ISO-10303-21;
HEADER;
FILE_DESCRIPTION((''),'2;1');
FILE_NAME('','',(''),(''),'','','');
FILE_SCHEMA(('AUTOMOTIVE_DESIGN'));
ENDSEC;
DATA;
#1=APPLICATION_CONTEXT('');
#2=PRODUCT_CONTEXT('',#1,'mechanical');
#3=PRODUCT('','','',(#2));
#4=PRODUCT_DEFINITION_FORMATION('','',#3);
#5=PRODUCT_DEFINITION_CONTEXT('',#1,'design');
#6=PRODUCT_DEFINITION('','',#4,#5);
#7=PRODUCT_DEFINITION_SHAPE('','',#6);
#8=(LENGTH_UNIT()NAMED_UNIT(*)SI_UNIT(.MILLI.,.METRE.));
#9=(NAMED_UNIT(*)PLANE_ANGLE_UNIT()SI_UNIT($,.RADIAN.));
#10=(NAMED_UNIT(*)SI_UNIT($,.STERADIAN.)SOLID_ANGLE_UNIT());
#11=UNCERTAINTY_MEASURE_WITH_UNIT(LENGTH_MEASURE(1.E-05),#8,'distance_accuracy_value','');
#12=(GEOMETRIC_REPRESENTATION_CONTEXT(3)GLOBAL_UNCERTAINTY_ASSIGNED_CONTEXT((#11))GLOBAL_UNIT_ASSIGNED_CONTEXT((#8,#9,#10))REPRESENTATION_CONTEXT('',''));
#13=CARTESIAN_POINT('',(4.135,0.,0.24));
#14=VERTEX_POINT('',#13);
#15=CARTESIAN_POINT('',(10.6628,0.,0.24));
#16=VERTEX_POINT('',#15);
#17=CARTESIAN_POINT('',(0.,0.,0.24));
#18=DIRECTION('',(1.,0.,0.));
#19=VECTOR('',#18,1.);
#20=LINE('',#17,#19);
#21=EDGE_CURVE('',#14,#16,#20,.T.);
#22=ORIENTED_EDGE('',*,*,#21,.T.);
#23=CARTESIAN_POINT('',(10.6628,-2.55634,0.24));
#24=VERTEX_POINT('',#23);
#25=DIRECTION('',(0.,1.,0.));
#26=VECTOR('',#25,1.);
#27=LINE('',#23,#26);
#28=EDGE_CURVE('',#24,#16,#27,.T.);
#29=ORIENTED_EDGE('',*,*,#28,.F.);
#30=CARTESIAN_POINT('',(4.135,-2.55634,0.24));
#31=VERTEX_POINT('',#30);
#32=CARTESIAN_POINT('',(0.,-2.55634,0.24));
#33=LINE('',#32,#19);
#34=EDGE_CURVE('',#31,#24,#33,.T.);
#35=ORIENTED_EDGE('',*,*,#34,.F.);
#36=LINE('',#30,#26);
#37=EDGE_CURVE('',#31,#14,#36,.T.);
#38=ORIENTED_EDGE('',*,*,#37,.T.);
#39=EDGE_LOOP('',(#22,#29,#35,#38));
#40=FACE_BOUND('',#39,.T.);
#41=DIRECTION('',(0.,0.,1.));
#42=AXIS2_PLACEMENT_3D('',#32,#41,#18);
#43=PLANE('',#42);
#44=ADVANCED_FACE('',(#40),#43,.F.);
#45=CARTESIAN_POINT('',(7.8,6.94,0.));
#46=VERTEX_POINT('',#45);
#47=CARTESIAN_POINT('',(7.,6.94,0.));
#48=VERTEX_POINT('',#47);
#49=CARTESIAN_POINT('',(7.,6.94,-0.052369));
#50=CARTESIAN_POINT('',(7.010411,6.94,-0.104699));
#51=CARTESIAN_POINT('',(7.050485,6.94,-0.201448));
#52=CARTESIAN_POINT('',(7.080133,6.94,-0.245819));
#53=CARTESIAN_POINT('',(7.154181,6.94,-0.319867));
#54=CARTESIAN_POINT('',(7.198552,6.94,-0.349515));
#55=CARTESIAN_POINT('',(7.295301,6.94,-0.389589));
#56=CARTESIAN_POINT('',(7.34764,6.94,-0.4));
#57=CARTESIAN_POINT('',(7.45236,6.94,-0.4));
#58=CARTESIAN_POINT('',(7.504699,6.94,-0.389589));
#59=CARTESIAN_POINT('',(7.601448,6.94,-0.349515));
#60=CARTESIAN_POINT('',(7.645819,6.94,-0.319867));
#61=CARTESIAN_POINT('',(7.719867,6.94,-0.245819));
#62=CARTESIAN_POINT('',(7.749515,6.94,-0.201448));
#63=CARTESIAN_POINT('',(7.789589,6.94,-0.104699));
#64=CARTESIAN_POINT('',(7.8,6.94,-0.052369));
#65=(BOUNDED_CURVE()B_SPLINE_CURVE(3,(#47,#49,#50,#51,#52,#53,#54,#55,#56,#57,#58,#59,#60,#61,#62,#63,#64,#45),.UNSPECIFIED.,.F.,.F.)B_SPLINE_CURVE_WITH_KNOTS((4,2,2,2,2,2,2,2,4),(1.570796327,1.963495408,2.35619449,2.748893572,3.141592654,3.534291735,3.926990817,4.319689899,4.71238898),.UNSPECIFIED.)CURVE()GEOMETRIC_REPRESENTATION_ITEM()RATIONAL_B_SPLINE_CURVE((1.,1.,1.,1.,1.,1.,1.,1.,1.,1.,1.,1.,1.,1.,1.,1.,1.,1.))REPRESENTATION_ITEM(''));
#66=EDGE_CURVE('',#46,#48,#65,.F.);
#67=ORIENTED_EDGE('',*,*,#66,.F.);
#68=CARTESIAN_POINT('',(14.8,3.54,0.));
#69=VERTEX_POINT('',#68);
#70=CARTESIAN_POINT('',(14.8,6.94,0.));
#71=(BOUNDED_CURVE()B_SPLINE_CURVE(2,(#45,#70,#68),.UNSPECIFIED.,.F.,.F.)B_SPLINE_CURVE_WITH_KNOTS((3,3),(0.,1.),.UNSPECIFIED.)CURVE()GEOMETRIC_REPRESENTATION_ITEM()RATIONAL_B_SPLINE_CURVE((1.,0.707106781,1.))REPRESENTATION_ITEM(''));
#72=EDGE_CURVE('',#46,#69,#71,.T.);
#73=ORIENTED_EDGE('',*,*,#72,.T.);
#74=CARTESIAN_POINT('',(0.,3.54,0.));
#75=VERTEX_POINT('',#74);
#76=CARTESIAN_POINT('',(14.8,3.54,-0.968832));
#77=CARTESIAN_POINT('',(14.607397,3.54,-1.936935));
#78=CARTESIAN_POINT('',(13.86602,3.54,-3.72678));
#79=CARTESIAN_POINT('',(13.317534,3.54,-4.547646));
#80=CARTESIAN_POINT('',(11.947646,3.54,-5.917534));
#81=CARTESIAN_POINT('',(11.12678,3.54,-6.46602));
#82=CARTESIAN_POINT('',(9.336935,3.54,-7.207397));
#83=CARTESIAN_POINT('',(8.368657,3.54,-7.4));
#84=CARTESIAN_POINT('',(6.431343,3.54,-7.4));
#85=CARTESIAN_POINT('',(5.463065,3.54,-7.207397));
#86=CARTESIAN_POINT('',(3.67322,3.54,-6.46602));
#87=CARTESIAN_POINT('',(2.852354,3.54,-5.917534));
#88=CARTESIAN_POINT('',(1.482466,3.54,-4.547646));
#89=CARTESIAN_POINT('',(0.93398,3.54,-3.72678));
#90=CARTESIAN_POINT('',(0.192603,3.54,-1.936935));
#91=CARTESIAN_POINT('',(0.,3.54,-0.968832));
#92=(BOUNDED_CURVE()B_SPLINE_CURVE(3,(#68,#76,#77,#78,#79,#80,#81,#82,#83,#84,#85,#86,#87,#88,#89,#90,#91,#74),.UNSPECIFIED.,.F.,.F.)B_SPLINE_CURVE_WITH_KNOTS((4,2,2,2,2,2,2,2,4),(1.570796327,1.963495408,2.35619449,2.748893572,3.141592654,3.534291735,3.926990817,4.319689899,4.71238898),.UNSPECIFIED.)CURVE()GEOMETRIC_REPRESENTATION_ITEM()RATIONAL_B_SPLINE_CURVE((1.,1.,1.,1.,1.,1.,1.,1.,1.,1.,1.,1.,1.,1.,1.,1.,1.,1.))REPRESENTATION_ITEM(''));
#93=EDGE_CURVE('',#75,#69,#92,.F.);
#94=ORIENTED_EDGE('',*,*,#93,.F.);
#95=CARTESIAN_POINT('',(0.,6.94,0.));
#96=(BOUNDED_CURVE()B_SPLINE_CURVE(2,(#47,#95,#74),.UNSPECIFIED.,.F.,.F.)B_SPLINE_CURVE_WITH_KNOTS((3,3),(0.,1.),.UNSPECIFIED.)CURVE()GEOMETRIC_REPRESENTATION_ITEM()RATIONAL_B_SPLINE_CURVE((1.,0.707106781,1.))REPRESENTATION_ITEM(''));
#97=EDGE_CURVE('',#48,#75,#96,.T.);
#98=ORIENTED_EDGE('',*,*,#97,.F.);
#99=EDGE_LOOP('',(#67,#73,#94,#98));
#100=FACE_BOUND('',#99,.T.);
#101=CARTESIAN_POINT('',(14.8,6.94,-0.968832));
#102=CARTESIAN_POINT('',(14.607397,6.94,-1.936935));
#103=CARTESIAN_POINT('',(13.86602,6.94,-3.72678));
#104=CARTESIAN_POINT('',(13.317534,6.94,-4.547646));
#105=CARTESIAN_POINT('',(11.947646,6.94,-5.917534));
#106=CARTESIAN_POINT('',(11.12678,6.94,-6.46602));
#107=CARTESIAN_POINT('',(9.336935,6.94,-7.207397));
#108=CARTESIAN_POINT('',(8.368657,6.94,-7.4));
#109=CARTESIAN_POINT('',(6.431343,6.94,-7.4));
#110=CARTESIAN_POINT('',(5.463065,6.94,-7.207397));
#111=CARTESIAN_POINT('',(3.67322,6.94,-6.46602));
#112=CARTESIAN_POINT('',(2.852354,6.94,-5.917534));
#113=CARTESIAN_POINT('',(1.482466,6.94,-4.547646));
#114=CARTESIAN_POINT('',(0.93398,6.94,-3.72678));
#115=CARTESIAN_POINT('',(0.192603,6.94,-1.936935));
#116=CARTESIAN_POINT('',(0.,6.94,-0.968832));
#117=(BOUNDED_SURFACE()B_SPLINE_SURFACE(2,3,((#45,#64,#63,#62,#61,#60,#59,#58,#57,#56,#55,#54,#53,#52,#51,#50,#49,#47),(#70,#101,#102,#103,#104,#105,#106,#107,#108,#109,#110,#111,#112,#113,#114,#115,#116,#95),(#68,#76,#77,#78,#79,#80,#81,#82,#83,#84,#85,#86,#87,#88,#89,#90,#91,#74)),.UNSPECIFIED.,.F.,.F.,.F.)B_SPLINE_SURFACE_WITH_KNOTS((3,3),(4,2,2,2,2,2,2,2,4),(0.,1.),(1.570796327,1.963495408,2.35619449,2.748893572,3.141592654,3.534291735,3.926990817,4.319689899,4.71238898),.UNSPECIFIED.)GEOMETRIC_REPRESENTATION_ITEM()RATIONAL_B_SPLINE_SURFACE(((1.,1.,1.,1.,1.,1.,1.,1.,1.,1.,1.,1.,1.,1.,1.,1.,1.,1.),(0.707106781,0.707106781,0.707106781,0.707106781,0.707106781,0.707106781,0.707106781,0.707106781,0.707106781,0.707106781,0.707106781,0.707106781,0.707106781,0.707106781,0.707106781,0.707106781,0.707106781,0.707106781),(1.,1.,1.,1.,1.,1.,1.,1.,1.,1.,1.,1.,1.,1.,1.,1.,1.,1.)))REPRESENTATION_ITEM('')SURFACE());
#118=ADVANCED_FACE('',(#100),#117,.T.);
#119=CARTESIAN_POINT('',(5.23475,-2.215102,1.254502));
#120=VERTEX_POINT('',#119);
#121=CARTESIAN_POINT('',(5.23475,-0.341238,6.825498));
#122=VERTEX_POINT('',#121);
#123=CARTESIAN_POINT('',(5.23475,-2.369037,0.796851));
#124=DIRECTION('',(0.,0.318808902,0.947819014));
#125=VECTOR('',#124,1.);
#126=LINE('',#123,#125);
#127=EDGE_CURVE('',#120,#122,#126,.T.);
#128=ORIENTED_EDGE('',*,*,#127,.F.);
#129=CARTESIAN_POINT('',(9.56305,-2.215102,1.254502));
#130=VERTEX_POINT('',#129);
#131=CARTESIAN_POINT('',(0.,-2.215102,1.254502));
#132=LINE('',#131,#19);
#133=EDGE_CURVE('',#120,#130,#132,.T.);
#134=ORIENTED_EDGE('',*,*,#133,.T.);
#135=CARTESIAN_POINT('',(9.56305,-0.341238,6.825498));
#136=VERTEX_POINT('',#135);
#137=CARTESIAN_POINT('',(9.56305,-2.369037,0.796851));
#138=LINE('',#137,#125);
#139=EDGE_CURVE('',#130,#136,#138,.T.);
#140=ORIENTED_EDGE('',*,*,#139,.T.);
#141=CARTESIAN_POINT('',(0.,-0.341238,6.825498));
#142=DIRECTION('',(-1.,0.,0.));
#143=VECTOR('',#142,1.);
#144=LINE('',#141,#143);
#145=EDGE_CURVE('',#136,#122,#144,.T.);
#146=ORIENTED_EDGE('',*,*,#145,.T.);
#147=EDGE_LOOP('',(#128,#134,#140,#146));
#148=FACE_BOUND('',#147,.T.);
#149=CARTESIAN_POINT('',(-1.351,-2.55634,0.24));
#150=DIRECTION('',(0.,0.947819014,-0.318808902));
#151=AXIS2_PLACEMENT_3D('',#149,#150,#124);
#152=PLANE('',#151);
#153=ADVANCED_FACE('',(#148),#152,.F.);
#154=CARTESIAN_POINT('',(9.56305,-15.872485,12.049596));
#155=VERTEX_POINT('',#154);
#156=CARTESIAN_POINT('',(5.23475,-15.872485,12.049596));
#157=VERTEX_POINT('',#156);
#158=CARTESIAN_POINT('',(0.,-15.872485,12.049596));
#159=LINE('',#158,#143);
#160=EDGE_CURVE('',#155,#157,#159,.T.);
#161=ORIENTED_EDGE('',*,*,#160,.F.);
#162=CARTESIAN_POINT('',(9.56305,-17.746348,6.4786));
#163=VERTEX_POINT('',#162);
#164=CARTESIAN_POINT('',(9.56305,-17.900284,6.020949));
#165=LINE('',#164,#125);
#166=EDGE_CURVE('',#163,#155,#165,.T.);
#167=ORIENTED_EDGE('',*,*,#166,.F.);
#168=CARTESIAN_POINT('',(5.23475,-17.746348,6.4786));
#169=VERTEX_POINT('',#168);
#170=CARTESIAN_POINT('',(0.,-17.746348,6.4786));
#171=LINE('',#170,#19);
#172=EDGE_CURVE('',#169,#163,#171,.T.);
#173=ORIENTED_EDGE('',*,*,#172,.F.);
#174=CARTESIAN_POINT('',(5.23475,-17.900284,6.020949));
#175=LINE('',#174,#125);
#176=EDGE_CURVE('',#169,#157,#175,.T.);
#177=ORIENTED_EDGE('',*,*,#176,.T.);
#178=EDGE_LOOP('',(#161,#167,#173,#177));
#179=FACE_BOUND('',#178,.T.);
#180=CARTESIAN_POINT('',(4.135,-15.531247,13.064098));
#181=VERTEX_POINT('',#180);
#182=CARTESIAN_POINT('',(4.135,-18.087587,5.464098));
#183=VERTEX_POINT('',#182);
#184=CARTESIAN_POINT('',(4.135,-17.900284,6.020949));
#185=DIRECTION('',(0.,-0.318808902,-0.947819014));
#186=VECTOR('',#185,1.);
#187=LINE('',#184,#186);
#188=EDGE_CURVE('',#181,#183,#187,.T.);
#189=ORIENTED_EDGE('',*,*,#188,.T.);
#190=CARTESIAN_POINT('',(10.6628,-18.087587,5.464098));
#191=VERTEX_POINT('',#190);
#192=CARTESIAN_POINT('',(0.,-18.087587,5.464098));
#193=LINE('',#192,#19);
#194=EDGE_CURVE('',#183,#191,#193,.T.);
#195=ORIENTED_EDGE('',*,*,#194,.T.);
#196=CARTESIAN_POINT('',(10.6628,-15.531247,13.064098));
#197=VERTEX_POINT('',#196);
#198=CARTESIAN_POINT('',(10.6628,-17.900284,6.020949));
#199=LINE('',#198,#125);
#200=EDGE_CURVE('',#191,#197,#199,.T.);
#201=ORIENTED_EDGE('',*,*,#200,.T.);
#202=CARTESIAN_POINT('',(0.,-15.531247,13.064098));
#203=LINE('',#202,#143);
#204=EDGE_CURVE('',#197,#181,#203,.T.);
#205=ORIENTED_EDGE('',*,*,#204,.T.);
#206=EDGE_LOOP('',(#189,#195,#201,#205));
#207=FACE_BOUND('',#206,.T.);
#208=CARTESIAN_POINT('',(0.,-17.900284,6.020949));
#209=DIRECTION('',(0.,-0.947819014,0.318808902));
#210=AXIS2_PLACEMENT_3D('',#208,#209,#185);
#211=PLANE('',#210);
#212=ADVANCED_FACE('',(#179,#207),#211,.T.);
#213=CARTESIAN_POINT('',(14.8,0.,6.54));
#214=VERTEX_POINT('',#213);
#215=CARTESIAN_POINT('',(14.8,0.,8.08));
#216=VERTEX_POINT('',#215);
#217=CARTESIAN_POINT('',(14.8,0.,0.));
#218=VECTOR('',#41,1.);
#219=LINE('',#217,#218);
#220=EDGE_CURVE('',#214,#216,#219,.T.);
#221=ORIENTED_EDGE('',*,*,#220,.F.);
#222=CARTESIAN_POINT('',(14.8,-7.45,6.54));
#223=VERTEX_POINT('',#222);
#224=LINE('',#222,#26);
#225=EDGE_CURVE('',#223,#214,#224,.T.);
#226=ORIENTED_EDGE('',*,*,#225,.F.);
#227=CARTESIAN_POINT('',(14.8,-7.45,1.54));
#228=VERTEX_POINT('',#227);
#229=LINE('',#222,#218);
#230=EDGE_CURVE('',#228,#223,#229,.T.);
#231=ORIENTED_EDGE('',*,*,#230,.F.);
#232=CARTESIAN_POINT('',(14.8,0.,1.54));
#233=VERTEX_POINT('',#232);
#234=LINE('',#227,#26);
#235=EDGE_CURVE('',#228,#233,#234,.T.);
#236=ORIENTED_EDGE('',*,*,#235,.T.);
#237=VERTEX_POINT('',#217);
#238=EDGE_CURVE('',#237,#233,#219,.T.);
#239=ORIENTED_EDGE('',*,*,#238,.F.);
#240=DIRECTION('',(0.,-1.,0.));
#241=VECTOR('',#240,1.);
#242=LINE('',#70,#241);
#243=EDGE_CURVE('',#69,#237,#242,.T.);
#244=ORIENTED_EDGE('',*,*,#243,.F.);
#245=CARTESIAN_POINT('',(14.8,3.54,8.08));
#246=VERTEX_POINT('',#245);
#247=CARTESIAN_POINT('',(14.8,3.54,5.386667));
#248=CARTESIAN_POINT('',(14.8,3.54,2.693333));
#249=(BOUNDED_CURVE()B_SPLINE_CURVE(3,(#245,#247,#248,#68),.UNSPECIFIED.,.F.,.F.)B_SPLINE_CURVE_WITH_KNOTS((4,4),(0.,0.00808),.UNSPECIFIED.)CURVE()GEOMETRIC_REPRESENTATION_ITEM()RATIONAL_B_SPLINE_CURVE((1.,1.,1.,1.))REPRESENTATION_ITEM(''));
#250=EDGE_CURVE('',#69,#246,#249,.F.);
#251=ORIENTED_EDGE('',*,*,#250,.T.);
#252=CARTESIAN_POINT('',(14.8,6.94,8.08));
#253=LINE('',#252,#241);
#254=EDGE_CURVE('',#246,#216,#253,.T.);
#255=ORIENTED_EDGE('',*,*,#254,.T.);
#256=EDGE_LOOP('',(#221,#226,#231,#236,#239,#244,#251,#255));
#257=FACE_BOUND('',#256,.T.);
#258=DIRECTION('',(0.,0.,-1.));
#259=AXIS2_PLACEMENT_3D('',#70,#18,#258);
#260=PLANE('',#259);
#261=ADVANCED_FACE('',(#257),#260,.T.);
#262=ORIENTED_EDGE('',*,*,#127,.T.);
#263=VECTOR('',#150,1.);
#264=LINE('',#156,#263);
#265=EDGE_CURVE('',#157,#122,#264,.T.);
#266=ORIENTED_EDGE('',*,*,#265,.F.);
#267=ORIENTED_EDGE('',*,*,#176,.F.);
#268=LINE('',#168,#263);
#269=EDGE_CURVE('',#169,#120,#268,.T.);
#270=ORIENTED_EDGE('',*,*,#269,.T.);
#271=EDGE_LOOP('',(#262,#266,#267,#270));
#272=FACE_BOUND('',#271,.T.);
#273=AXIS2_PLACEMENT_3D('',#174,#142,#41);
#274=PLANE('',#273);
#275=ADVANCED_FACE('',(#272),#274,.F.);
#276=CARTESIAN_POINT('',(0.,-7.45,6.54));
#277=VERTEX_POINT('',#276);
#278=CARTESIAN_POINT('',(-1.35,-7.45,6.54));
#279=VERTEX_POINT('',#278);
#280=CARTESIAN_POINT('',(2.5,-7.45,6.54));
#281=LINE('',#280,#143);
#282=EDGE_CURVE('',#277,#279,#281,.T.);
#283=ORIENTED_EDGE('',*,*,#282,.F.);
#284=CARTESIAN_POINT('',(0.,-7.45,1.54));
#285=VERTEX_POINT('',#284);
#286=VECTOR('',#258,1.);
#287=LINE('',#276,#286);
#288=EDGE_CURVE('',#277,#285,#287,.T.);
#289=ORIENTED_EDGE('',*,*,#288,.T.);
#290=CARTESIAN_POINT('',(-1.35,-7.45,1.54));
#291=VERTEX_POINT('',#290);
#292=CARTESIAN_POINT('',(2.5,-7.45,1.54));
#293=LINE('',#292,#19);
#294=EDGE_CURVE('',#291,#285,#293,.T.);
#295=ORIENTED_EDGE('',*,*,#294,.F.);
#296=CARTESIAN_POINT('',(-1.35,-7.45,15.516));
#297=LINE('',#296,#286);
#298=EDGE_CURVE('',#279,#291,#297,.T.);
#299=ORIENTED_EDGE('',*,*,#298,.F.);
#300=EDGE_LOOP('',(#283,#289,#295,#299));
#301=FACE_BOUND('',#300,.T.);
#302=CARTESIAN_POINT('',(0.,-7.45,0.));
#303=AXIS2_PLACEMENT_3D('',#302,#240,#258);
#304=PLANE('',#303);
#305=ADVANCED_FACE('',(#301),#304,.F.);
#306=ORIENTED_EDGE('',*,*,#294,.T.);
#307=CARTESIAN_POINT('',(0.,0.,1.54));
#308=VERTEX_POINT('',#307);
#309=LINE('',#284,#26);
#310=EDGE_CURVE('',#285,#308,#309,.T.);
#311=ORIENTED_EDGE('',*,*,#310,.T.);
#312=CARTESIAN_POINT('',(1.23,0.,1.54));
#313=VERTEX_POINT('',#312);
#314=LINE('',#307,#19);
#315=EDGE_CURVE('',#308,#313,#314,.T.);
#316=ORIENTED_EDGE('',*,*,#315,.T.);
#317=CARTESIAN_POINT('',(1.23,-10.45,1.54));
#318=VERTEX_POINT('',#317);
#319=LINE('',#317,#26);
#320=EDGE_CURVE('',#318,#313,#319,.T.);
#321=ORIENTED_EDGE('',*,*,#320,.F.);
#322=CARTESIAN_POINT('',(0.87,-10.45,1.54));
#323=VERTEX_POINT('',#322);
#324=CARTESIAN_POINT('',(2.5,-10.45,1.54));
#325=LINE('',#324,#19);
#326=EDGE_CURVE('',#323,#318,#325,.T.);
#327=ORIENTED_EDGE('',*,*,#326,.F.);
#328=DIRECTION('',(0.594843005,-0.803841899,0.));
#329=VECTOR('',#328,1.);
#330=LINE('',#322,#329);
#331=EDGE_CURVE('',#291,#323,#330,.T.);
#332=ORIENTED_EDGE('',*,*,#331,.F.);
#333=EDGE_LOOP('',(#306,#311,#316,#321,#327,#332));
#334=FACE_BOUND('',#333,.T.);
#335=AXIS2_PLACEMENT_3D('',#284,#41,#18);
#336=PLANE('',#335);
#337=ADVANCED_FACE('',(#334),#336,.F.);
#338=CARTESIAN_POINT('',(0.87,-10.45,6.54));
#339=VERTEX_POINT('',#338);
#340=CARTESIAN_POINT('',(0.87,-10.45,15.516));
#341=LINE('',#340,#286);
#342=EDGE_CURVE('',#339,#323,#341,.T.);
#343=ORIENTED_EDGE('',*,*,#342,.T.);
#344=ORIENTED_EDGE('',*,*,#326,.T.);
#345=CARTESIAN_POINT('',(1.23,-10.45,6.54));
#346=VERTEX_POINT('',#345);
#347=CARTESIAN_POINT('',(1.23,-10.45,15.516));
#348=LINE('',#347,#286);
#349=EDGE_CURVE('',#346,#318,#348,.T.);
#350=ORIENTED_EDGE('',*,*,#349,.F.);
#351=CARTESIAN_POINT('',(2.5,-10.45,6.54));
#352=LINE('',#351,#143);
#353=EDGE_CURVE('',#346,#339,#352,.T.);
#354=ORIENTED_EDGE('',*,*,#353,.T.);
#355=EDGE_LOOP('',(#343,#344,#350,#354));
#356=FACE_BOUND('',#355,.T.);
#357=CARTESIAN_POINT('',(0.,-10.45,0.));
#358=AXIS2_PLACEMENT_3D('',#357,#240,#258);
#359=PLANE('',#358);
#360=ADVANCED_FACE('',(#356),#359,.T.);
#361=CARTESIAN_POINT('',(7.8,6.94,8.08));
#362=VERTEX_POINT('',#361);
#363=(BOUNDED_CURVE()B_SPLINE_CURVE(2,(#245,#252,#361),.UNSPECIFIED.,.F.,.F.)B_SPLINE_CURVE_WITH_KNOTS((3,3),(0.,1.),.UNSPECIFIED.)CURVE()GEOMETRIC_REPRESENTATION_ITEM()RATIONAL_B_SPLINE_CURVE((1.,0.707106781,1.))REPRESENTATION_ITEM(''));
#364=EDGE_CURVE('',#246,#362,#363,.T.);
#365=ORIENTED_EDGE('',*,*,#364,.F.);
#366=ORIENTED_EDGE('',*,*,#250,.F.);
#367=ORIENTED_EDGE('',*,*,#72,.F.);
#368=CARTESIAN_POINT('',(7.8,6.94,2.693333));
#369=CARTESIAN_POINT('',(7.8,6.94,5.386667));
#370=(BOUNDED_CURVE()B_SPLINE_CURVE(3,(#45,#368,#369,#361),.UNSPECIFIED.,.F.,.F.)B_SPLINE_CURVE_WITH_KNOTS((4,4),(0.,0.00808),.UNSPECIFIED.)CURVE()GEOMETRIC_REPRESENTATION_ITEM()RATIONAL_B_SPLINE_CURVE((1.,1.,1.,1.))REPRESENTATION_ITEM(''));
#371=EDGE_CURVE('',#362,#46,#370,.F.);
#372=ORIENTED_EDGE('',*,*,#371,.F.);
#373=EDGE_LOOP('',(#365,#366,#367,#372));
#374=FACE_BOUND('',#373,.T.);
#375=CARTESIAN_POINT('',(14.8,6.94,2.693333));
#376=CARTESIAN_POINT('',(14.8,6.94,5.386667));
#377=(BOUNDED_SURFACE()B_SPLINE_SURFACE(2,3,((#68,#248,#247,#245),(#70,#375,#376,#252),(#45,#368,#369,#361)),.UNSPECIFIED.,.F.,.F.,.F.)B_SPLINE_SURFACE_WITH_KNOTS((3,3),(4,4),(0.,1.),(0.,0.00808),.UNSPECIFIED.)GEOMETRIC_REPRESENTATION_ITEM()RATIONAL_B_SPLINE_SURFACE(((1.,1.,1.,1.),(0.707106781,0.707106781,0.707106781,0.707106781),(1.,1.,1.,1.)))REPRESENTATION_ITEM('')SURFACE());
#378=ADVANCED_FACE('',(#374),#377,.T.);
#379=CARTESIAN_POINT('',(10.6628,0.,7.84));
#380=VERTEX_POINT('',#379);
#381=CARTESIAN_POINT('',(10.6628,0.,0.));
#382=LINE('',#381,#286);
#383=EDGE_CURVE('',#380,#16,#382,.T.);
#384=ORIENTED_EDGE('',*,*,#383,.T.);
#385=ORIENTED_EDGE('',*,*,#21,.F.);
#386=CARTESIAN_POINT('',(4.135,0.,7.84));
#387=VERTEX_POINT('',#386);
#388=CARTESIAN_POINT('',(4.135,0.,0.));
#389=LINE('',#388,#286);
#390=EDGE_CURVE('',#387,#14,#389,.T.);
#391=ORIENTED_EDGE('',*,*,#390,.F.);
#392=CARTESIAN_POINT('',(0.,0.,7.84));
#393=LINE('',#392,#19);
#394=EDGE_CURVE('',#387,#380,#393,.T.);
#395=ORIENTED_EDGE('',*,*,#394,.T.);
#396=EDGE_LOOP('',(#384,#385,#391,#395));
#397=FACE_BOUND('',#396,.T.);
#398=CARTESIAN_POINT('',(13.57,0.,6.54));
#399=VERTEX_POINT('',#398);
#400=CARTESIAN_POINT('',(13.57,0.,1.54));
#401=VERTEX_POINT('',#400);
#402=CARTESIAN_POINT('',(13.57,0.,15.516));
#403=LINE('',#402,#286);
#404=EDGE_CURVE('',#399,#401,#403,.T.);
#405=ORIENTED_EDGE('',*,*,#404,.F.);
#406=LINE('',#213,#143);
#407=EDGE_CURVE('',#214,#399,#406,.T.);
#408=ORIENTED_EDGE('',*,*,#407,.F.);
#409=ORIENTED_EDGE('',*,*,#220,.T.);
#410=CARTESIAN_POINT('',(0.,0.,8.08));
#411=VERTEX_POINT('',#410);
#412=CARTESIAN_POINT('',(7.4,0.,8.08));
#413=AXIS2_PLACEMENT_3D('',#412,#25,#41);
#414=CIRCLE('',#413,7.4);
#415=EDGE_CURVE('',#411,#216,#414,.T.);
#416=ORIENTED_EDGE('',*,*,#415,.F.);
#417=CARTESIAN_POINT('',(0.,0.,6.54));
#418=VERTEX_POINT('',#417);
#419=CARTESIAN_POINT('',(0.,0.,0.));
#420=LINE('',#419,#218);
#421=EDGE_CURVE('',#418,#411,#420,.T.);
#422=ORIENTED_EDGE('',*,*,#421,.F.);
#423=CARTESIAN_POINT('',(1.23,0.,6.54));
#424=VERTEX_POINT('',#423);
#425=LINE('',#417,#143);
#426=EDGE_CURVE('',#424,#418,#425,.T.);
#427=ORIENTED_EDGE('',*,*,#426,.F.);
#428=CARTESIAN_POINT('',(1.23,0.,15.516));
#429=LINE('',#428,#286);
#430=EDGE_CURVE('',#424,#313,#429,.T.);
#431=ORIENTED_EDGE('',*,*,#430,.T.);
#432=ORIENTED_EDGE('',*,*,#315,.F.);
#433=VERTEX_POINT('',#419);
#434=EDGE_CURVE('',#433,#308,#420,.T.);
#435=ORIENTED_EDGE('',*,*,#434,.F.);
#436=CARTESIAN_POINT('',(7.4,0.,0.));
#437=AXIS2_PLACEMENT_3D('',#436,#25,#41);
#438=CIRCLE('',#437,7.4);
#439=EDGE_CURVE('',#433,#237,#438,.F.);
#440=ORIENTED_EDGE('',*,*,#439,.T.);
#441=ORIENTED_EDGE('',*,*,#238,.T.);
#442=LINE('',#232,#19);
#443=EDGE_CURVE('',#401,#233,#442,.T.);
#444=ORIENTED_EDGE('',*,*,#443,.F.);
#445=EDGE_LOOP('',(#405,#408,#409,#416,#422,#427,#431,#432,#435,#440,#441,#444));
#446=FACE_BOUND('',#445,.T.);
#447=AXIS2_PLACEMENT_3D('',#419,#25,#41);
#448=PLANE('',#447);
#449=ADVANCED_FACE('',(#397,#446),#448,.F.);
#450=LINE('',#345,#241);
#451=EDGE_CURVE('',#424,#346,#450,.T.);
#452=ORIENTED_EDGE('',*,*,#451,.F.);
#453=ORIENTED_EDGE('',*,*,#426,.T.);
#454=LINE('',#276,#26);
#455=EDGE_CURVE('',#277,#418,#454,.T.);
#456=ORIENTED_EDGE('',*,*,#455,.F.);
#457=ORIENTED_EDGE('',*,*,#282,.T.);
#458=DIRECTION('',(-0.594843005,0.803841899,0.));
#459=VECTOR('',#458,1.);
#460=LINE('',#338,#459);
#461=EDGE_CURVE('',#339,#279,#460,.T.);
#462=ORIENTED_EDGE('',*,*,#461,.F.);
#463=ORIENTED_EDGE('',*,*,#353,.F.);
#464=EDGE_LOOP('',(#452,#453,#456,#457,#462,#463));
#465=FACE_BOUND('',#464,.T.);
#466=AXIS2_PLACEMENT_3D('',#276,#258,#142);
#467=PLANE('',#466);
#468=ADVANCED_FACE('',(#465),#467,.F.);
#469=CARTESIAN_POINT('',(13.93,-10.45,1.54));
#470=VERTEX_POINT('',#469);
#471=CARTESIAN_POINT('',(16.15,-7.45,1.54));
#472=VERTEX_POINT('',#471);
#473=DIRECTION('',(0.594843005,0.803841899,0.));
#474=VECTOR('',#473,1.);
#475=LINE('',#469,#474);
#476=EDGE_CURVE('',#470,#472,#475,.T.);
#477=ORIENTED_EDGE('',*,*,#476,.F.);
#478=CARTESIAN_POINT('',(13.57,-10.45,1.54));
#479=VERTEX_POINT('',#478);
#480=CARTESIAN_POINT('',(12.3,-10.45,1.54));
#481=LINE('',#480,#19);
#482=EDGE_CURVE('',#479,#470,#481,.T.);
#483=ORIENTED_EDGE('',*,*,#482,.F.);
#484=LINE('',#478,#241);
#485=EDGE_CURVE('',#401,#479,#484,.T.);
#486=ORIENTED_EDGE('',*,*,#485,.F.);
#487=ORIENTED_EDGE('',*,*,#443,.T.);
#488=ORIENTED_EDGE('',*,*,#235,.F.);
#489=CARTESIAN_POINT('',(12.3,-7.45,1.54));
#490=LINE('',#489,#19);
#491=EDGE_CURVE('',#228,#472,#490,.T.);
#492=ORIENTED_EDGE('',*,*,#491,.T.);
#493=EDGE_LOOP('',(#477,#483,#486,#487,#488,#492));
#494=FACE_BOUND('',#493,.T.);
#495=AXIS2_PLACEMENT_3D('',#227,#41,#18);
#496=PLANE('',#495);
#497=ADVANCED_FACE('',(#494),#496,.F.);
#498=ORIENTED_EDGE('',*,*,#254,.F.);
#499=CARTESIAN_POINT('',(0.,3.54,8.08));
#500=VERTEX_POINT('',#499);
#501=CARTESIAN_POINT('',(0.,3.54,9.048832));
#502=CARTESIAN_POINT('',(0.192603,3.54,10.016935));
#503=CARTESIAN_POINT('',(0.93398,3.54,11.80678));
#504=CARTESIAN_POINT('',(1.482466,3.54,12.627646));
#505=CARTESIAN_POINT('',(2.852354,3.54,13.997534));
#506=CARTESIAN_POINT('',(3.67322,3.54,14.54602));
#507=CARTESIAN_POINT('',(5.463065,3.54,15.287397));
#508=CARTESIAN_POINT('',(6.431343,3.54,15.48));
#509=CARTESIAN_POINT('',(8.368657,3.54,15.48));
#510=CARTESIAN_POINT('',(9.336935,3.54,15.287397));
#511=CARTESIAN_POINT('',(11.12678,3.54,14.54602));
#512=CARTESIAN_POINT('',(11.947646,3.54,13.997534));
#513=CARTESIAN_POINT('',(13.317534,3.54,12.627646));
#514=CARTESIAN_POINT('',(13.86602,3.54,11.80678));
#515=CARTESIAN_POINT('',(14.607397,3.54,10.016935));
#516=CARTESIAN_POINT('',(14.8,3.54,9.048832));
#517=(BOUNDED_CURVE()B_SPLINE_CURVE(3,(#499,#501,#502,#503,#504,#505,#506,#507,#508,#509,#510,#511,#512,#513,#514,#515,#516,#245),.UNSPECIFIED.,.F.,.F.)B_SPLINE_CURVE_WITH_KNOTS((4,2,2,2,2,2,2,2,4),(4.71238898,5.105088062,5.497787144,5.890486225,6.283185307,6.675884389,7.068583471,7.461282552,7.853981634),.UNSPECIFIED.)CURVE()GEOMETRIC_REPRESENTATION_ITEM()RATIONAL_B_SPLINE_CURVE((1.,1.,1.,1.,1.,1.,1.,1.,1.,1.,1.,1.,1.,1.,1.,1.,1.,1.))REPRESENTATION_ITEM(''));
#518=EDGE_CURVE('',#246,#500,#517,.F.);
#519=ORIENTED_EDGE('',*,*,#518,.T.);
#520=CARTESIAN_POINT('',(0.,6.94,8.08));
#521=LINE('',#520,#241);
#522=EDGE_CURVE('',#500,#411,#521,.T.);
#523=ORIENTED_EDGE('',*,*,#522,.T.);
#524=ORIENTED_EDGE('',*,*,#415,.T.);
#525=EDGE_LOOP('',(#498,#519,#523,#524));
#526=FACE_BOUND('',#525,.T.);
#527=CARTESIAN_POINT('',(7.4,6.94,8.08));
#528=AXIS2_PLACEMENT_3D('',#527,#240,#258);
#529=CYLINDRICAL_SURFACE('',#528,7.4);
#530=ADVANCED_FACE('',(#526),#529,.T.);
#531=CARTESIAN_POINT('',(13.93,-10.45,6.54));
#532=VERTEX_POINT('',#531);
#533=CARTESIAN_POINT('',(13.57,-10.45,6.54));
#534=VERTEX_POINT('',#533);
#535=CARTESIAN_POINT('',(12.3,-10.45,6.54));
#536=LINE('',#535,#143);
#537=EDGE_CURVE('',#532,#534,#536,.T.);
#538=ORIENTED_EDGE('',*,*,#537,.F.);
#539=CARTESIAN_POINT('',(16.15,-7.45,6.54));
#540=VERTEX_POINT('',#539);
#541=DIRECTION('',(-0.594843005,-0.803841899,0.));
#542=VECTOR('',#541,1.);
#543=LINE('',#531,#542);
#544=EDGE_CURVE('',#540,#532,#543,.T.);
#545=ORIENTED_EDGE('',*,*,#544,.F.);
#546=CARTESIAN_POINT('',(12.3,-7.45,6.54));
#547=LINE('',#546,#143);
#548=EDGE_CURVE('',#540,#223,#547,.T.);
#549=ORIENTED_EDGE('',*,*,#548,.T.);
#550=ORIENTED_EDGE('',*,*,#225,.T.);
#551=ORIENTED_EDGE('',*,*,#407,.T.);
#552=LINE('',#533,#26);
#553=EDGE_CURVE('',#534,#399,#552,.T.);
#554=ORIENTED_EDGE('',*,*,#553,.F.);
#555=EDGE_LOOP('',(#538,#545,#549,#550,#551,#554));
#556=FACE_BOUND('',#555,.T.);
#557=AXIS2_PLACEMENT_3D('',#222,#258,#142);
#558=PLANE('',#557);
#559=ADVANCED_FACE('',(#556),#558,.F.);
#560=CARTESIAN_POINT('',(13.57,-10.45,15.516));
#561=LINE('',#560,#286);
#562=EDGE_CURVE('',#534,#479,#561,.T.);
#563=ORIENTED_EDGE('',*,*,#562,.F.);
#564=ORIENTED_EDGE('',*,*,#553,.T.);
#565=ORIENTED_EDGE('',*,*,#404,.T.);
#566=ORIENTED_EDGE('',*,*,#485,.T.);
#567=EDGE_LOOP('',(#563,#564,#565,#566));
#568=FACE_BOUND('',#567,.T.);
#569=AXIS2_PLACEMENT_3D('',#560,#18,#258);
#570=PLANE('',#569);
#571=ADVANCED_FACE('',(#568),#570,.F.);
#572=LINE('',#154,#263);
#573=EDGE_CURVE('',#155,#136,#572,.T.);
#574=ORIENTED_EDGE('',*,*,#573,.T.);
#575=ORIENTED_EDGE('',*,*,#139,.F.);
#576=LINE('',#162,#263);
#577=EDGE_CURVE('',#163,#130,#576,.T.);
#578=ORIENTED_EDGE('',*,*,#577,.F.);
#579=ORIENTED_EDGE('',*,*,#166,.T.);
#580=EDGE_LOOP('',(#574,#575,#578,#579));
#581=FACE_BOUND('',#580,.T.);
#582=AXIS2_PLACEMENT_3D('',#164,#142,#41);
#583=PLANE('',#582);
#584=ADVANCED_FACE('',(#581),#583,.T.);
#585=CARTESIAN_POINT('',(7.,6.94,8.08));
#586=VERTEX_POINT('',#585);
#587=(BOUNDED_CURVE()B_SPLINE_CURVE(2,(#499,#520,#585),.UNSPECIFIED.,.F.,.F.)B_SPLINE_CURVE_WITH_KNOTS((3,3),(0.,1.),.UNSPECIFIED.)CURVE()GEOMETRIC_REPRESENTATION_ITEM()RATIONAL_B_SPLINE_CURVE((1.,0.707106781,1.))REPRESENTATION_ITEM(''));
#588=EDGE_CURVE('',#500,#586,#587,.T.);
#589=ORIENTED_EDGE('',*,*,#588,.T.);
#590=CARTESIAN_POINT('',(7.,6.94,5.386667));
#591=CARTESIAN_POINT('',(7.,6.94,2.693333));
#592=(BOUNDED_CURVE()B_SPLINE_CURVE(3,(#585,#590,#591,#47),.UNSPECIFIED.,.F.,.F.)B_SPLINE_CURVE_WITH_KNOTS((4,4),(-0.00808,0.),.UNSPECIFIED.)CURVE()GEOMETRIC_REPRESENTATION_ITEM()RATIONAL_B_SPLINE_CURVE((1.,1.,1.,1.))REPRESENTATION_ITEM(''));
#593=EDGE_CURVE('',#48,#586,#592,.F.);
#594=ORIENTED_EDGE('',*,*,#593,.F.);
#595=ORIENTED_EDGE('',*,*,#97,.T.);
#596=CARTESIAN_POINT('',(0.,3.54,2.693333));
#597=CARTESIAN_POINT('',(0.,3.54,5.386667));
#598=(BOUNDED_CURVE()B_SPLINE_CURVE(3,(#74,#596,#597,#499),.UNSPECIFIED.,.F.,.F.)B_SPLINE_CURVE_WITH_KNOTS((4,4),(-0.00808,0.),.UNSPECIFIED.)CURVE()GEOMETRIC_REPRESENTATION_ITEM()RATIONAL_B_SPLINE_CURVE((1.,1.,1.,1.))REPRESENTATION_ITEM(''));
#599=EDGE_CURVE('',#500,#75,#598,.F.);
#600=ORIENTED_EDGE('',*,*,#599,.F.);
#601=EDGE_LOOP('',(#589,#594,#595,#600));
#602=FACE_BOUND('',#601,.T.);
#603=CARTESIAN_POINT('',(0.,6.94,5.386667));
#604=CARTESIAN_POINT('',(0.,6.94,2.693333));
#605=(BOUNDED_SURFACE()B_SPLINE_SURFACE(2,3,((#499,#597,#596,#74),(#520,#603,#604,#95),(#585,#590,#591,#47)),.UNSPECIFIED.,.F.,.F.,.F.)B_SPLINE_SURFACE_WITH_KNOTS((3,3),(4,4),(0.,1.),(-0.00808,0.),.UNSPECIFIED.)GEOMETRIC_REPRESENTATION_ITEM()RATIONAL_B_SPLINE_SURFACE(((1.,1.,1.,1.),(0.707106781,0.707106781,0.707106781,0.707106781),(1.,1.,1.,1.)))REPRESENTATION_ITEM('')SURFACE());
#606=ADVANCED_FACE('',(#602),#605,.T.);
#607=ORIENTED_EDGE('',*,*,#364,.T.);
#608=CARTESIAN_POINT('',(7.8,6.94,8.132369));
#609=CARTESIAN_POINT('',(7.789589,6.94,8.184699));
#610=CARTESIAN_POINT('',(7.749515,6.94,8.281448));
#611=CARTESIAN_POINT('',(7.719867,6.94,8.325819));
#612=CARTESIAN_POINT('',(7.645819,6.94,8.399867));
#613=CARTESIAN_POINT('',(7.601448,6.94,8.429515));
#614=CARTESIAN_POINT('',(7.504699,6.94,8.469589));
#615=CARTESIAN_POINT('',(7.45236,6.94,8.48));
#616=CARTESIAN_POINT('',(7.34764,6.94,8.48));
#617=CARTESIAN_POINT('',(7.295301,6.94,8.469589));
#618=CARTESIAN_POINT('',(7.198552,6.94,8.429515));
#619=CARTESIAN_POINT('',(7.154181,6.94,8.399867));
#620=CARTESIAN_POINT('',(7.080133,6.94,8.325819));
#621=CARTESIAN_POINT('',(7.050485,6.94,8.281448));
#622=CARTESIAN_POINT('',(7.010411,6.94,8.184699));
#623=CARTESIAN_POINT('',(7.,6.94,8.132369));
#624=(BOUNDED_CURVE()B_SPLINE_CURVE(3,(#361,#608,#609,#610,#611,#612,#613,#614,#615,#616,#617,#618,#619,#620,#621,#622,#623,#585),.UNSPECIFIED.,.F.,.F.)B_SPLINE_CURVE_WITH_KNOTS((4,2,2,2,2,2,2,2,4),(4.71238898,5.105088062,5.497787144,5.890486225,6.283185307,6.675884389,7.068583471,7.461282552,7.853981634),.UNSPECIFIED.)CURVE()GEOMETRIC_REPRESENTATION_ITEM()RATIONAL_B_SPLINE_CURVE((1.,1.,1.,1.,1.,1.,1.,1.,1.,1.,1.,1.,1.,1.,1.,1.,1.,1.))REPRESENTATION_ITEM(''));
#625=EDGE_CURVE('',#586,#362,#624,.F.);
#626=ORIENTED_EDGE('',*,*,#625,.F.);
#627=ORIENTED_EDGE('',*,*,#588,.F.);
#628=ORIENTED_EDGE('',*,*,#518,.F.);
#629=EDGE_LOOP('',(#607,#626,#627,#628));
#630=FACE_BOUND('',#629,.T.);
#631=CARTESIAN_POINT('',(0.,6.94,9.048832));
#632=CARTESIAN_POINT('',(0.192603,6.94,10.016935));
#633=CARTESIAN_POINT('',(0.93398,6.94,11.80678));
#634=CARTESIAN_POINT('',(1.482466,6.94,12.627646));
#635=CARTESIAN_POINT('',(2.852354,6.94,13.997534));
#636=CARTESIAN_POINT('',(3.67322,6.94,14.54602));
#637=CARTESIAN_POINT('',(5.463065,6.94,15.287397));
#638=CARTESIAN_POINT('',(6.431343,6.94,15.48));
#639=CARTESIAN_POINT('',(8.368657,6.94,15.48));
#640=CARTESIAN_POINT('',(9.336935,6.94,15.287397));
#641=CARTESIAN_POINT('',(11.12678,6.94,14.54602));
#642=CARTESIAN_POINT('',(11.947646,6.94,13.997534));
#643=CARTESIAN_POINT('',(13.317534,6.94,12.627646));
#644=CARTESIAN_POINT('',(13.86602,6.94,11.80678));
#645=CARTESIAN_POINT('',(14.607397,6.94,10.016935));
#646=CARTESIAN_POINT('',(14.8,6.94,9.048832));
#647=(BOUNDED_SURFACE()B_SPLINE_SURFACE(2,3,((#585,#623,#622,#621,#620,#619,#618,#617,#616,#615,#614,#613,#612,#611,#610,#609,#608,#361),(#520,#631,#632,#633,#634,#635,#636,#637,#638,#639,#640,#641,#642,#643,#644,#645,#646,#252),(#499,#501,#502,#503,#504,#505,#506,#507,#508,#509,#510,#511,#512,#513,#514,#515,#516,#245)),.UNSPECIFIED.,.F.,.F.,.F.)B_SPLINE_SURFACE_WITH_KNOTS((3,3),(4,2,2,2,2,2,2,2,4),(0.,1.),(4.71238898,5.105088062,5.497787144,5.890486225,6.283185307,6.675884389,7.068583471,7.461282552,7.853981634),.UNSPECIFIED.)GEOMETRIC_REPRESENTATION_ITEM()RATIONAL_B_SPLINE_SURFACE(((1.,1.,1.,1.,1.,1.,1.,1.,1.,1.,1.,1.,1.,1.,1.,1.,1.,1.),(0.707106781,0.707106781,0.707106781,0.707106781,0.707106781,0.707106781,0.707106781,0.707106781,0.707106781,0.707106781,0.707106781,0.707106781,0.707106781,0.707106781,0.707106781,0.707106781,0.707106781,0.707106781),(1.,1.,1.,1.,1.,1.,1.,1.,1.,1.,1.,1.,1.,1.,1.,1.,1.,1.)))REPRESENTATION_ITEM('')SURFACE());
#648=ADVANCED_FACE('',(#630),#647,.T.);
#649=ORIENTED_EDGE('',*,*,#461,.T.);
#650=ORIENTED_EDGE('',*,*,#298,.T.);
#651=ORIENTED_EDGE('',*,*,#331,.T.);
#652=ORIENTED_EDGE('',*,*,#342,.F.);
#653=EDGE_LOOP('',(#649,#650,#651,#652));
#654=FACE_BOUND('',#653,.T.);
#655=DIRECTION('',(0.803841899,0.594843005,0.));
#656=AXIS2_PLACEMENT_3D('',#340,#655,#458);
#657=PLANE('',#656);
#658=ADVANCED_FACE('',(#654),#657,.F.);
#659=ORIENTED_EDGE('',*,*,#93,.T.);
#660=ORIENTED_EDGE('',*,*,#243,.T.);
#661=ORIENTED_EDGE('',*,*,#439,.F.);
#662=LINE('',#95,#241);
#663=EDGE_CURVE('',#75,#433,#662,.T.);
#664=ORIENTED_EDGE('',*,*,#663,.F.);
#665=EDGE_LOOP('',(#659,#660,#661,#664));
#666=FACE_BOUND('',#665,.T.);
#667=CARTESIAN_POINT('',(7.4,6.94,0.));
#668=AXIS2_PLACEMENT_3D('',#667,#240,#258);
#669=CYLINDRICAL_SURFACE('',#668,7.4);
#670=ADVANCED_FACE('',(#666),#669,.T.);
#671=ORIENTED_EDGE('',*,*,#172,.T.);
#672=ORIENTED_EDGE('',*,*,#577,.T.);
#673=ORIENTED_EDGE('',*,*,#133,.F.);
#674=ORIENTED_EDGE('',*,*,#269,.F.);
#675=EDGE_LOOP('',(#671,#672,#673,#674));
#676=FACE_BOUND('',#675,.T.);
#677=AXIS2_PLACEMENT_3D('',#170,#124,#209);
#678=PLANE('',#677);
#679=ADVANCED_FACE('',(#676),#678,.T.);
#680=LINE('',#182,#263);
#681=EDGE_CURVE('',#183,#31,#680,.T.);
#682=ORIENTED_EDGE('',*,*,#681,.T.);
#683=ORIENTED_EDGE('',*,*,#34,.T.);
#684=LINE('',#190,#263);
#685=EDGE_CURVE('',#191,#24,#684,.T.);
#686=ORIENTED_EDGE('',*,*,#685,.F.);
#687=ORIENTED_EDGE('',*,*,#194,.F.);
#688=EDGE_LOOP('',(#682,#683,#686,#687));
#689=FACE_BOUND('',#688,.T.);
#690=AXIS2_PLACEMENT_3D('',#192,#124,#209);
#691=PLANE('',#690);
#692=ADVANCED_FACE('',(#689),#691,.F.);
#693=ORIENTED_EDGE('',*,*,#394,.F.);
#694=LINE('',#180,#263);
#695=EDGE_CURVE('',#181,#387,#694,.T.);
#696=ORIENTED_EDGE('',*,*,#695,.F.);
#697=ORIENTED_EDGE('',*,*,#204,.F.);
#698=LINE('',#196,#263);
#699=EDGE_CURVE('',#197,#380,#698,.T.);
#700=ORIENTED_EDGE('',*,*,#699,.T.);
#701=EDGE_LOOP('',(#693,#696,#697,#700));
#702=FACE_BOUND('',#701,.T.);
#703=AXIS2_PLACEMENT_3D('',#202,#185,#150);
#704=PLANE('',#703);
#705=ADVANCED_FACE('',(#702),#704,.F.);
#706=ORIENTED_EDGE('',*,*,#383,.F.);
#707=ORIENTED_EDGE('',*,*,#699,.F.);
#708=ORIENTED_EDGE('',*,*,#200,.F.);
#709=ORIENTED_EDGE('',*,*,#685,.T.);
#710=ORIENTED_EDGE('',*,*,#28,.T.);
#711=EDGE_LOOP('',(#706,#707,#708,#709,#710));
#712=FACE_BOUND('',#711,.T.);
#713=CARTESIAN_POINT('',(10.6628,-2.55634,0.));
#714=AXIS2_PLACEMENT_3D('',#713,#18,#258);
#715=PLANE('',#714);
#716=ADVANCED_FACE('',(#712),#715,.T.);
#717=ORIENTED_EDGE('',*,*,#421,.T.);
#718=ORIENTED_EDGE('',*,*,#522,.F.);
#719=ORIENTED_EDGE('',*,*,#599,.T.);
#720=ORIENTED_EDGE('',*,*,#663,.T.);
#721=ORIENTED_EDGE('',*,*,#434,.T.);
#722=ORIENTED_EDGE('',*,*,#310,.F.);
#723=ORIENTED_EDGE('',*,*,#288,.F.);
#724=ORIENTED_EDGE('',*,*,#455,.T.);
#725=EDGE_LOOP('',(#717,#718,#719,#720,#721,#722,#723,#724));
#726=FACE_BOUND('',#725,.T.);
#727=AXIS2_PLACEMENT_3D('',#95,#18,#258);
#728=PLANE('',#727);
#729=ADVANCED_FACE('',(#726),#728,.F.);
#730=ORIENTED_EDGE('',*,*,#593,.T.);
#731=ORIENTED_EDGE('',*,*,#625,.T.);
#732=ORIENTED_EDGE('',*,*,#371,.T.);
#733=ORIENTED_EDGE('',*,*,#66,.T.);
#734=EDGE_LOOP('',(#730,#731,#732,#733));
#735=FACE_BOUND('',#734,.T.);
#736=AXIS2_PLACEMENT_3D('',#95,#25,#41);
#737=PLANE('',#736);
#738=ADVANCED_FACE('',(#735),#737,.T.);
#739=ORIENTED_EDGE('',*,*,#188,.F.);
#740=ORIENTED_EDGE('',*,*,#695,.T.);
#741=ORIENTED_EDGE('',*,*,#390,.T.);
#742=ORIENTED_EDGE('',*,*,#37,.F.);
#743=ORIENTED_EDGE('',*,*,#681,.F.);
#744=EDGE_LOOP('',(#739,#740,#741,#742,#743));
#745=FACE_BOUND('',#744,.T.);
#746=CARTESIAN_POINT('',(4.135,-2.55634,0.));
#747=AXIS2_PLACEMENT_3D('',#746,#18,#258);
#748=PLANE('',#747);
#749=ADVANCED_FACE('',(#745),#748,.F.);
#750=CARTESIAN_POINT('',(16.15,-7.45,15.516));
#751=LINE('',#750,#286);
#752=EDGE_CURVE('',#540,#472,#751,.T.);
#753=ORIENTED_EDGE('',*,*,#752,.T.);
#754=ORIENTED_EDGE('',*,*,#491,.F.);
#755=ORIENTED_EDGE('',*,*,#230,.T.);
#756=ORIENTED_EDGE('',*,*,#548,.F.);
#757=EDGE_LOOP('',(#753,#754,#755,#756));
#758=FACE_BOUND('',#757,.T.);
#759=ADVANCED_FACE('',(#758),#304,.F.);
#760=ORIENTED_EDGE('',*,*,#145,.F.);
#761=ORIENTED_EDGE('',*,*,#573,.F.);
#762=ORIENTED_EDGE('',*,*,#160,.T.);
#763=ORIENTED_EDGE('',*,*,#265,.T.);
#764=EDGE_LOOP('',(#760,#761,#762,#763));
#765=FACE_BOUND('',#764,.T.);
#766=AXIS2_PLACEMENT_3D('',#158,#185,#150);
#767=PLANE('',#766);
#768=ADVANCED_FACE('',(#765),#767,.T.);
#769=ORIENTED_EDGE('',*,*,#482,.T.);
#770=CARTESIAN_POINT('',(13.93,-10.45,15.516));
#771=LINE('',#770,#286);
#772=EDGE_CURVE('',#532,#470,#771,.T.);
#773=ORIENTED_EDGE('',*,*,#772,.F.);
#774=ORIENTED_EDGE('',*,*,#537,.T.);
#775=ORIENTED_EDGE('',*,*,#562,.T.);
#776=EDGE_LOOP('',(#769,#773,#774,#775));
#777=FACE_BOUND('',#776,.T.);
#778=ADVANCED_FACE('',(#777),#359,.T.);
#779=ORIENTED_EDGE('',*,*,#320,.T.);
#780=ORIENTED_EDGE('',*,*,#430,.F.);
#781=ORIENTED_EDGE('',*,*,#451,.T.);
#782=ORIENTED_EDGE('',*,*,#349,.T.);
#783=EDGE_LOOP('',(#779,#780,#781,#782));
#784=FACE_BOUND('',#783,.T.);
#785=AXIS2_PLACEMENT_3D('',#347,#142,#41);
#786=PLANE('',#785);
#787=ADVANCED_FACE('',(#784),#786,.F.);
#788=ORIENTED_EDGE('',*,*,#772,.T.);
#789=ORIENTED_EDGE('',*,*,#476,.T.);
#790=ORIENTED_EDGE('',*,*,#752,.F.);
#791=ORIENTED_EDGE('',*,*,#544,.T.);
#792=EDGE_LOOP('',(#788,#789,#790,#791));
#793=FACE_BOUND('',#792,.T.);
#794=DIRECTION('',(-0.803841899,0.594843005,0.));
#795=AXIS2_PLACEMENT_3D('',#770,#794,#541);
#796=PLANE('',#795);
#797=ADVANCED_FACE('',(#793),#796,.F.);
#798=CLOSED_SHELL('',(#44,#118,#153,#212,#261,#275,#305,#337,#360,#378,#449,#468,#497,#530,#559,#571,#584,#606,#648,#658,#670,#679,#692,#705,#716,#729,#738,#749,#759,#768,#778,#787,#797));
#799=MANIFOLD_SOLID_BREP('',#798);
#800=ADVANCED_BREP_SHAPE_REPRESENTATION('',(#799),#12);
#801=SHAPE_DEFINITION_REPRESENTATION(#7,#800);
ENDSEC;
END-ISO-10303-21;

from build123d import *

# Parameters (mm, degrees)
SKETCH1_W           = 14.8
SKETCH1_H           = 8.08
BOSS_EXTRUDE1_DEPTH = 6.94
FILLET1_SIZE        = 7
FILLET1_SIZE_2      = 3.4
SKETCH2_W           = 2.5
SKETCH2_H           = 5
BOSS_EXTRUDE2_DEPTH = 7.45
SKETCH3_W           = 4.44
SKETCH3_H           = 5
BOSS_EXTRUDE3_DEPTH = 3
CUT_EXTRUDE1_REACH  = 26.161
CUT_EXTRUDE2_REACH  = 26.161
CUT_EXTRUDE3_REACH  = 25.756
SKETCH6_W           = 1.27
SKETCH6_H           = 10.45
SKETCH7_W           = 6.5278
SKETCH7_H           = 5
SKETCH7_H_2         = 1.3
BOSS_EXTRUDE4_DEPTH = 2.55634
CUT_EXTRUDE4_REACH  = 24.207
SKETCH9_W           = 6.5278
SKETCH9_H           = 8.018408457
SKETCH9_W_2         = 4.3283
SKETCH9_H_2         = 5.8777
BOSS_EXTRUDE5_DEPTH = 16.3863


with BuildPart() as part:
    # Sketch1 → Boss-Extrude1 (new body)
    with BuildSketch(Plane(origin=(0, 0, 0), x_dir=(1, 0, 0), z_dir=(0, 1, 0))):
        with BuildLine():
            Line((0, -8.08), (14.8, -8.08))
            ThreePointArc((14.8, -8.08), (7.4, -15.48), (0, -8.08))
        make_face()
        with Locations((7.4, -4.04)):
            Rectangle(SKETCH1_W, SKETCH1_H)
        with BuildLine():
            ThreePointArc((0, 0), (7.4, 7.4), (14.8, 0))
            Line((14.8, 0), (0, 0))
        make_face()
    extrude(amount=BOSS_EXTRUDE1_DEPTH)

    # Fillet1
    # an asymmetric fillet: 7, 3.4 mm, written as the material it takes off along each edge
    with BuildSketch(Plane(origin=(7.4, 6.94, 0), x_dir=(-1, 0, 0), z_dir=(0, 0, 1))) as fillet1_piece_1:
        with BuildLine():
            Bezier((7.4 - FILLET1_SIZE, 0), (7.4, 0), (7.4, FILLET1_SIZE_2), weights=[1, 0.707106781, 1])
            Line((7.4, FILLET1_SIZE_2), (7.4, 0))
            Line((7.4, 0), (7.4 - FILLET1_SIZE, 0))
        make_face()
    revolve(axis=Axis((7.4, 6.94, 0), (0, -1, 0)), revolution_arc=180, mode=Mode.SUBTRACT)
    with BuildSketch(Plane(origin=(0, 6.94, 8.08), x_dir=(0, -1, 0), z_dir=(0, 0, -1)), Plane(origin=(14.8, 6.94, 0), x_dir=(0, -1, 0), z_dir=(0, 0, 1))) as fillet1_piece_2:
        with BuildLine():
            Bezier((FILLET1_SIZE_2, 0), (0, 0), (0, -FILLET1_SIZE), weights=[1, 0.707106781, 1])
            Line((0, -FILLET1_SIZE), (0, 0))
            Line((0, 0), (FILLET1_SIZE_2, 0))
        make_face()
    extrude(amount=8.08, mode=Mode.SUBTRACT)
    with BuildSketch(Plane(origin=(7.4, 6.94, 8.08), x_dir=(1, 0, 0), z_dir=(0, 0, -1))) as fillet1_piece_3:
        with BuildLine():
            Bezier((7.4, FILLET1_SIZE_2), (7.4, 0), (7.4 - FILLET1_SIZE, 0), weights=[1, 0.707106781, 1])
            Line((7.4 - FILLET1_SIZE, 0), (7.4, 0))
            Line((7.4, 0), (7.4, FILLET1_SIZE_2))
        make_face()
    revolve(axis=Axis((7.4, 6.94, 8.08), (0, -1, 0)), revolution_arc=180, mode=Mode.SUBTRACT)

    # Sketch2 → Boss-Extrude2 (add)
    with BuildSketch(Plane.XZ):
        with Locations((1.25, 4.04)):
            Rectangle(SKETCH2_W, SKETCH2_H)
        with Locations((13.55, 4.04)):
            Rectangle(SKETCH2_W, SKETCH2_H)
    extrude(amount=BOSS_EXTRUDE2_DEPTH)

    # Sketch3 → Boss-Extrude3 (add)
    with BuildSketch(Plane(origin=(0, -7.45, 0), x_dir=(-1, 0, 0), z_dir=(0, -1, 0))):
        with Locations((-0.28, -4.04)):
            Rectangle(SKETCH3_W, SKETCH3_H)
        with Locations((-14.52, -4.04)):
            Rectangle(SKETCH3_W, SKETCH3_H)
    extrude(amount=BOSS_EXTRUDE3_DEPTH)

    # Sketch4 → Cut-Extrude1 (cut, up to next)
    with BuildSketch(Plane(origin=(0, 0, 1.54), x_dir=(-1, 0, 0), z_dir=(0, 0, -1)), mode=Mode.PRIVATE) as cut_extrude1_sk1:
        Polygon((1.94, -7.45), (-0.28, -10.45), (1.94, -10.45), align=None)
    cut_extrude1_tool1 = extrude(cut_extrude1_sk1.sketch, amount=-CUT_EXTRUDE1_REACH, mode=Mode.PRIVATE) & part.part
    # Sketch4 → Cut-Extrude1 (cut, up to next)
    with BuildSketch(Plane(origin=(0, 0, 1.54), x_dir=(-1, 0, 0), z_dir=(0, 0, -1)), mode=Mode.PRIVATE) as cut_extrude1_sk2:
        Polygon((-16.74, -7.45), (-16.74, -10.45), (-14.52, -10.45), align=None)
    cut_extrude1_tool2 = extrude(cut_extrude1_sk2.sketch, amount=-CUT_EXTRUDE1_REACH, mode=Mode.PRIVATE) & part.part
    add(cut_extrude1_tool1.solids().sort_by_distance((-1.2, -9.45, 1.54))[0], mode=Mode.SUBTRACT)
    add(cut_extrude1_tool2.solids().sort_by_distance((16, -9.45, 1.54))[0], mode=Mode.SUBTRACT)

    # Sketch5 → Cut-Extrude2 (cut, up to next)
    with BuildSketch(Plane(origin=(0, 0, 1.54), x_dir=(-1, 0, 0), z_dir=(0, 0, -1)), mode=Mode.PRIVATE) as cut_extrude2_sk1:
        Polygon((-0.28, -10.45), (-0.87, -10.45), (1.35, -7.45), (1.94, -7.45), align=None)
    cut_extrude2_tool1 = extrude(cut_extrude2_sk1.sketch, amount=-CUT_EXTRUDE2_REACH, mode=Mode.PRIVATE) & part.part
    # Sketch5 → Cut-Extrude2 (cut, up to next)
    with BuildSketch(Plane(origin=(0, 0, 1.54), x_dir=(-1, 0, 0), z_dir=(0, 0, -1)), mode=Mode.PRIVATE) as cut_extrude2_sk2:
        Polygon((-14.52, -10.45), (-13.93, -10.45), (-16.15, -7.45), (-16.74, -7.45), align=None)
    cut_extrude2_tool2 = extrude(cut_extrude2_sk2.sketch, amount=-CUT_EXTRUDE2_REACH, mode=Mode.PRIVATE) & part.part
    add(cut_extrude2_tool1.solids().sort_by_distance((-0.535, -8.95, 1.54))[0], mode=Mode.SUBTRACT)
    add(cut_extrude2_tool2.solids().sort_by_distance((15.335, -8.95, 1.54))[0], mode=Mode.SUBTRACT)

    # Sketch6 → Cut-Extrude3 (cut, up to next)
    with BuildSketch(Plane(origin=(0, 0, 1.54), x_dir=(-1, 0, 0), z_dir=(0, 0, -1)), mode=Mode.PRIVATE) as cut_extrude3_sk1:
        with Locations((-1.865, -5.225)):
            Rectangle(SKETCH6_W, SKETCH6_H)
    cut_extrude3_tool1 = extrude(cut_extrude3_sk1.sketch, amount=-CUT_EXTRUDE3_REACH, mode=Mode.PRIVATE) & part.part
    # Sketch6 → Cut-Extrude3 (cut, up to next)
    with BuildSketch(Plane(origin=(0, 0, 1.54), x_dir=(-1, 0, 0), z_dir=(0, 0, -1)), mode=Mode.PRIVATE) as cut_extrude3_sk2:
        with Locations((-12.935, -5.225)):
            Rectangle(SKETCH6_W, SKETCH6_H)
    cut_extrude3_tool2 = extrude(cut_extrude3_sk2.sketch, amount=-CUT_EXTRUDE3_REACH, mode=Mode.PRIVATE) & part.part
    add(cut_extrude3_tool1.solids().sort_by_distance((1.865, -5.225, 1.54))[0], mode=Mode.SUBTRACT)
    add(cut_extrude3_tool2.solids().sort_by_distance((12.935, -5.225, 1.54))[0], mode=Mode.SUBTRACT)

    # Sketch7 → Boss-Extrude4 (add)
    with BuildSketch(Plane.XZ):
        with Locations((7.3989, 4.04)):
            Rectangle(SKETCH7_W, SKETCH7_H)
        with Locations((7.3989, 0.89)):
            Rectangle(SKETCH7_W, SKETCH7_H_2)
        with Locations((7.3989, 7.19)):
            Rectangle(SKETCH7_W, SKETCH7_H_2)
    extrude(amount=BOSS_EXTRUDE4_DEPTH)

    # Sketch8 → Cut-Extrude4 (cut, up to next)
    with BuildSketch(Plane(origin=(10.6628, 0, 0), x_dir=(0, 0, -1), z_dir=(1, 0, 0)), mode=Mode.PRIVATE) as cut_extrude4_sk1:
        Polygon((-0.24, -2.55634), (-7.84, 0), (-7.84, -2.55634), align=None)
    cut_extrude4_tool1 = extrude(cut_extrude4_sk1.sketch, amount=-CUT_EXTRUDE4_REACH, mode=Mode.PRIVATE) & part.part
    add(cut_extrude4_tool1.solids().sort_by_distance((10.6628, -1.704227, 5.306667))[0], mode=Mode.SUBTRACT)

    # Sketch9 → Boss-Extrude5 (add)
    with BuildSketch(Plane(origin=(0, -2.369037415, 0.796850672), x_dir=(1, 0, 0), z_dir=(0, -0.9478190142131836, 0.31880890247285915))):
        with Locations((7.3989, 3.421696842)):
            Rectangle(SKETCH9_W, SKETCH9_H)
        with Locations((7.3989, 3.421696843)):
            Rectangle(SKETCH9_W_2, SKETCH9_H_2, mode=Mode.SUBTRACT)
    extrude(amount=BOSS_EXTRUDE5_DEPTH)


solid = part.part
